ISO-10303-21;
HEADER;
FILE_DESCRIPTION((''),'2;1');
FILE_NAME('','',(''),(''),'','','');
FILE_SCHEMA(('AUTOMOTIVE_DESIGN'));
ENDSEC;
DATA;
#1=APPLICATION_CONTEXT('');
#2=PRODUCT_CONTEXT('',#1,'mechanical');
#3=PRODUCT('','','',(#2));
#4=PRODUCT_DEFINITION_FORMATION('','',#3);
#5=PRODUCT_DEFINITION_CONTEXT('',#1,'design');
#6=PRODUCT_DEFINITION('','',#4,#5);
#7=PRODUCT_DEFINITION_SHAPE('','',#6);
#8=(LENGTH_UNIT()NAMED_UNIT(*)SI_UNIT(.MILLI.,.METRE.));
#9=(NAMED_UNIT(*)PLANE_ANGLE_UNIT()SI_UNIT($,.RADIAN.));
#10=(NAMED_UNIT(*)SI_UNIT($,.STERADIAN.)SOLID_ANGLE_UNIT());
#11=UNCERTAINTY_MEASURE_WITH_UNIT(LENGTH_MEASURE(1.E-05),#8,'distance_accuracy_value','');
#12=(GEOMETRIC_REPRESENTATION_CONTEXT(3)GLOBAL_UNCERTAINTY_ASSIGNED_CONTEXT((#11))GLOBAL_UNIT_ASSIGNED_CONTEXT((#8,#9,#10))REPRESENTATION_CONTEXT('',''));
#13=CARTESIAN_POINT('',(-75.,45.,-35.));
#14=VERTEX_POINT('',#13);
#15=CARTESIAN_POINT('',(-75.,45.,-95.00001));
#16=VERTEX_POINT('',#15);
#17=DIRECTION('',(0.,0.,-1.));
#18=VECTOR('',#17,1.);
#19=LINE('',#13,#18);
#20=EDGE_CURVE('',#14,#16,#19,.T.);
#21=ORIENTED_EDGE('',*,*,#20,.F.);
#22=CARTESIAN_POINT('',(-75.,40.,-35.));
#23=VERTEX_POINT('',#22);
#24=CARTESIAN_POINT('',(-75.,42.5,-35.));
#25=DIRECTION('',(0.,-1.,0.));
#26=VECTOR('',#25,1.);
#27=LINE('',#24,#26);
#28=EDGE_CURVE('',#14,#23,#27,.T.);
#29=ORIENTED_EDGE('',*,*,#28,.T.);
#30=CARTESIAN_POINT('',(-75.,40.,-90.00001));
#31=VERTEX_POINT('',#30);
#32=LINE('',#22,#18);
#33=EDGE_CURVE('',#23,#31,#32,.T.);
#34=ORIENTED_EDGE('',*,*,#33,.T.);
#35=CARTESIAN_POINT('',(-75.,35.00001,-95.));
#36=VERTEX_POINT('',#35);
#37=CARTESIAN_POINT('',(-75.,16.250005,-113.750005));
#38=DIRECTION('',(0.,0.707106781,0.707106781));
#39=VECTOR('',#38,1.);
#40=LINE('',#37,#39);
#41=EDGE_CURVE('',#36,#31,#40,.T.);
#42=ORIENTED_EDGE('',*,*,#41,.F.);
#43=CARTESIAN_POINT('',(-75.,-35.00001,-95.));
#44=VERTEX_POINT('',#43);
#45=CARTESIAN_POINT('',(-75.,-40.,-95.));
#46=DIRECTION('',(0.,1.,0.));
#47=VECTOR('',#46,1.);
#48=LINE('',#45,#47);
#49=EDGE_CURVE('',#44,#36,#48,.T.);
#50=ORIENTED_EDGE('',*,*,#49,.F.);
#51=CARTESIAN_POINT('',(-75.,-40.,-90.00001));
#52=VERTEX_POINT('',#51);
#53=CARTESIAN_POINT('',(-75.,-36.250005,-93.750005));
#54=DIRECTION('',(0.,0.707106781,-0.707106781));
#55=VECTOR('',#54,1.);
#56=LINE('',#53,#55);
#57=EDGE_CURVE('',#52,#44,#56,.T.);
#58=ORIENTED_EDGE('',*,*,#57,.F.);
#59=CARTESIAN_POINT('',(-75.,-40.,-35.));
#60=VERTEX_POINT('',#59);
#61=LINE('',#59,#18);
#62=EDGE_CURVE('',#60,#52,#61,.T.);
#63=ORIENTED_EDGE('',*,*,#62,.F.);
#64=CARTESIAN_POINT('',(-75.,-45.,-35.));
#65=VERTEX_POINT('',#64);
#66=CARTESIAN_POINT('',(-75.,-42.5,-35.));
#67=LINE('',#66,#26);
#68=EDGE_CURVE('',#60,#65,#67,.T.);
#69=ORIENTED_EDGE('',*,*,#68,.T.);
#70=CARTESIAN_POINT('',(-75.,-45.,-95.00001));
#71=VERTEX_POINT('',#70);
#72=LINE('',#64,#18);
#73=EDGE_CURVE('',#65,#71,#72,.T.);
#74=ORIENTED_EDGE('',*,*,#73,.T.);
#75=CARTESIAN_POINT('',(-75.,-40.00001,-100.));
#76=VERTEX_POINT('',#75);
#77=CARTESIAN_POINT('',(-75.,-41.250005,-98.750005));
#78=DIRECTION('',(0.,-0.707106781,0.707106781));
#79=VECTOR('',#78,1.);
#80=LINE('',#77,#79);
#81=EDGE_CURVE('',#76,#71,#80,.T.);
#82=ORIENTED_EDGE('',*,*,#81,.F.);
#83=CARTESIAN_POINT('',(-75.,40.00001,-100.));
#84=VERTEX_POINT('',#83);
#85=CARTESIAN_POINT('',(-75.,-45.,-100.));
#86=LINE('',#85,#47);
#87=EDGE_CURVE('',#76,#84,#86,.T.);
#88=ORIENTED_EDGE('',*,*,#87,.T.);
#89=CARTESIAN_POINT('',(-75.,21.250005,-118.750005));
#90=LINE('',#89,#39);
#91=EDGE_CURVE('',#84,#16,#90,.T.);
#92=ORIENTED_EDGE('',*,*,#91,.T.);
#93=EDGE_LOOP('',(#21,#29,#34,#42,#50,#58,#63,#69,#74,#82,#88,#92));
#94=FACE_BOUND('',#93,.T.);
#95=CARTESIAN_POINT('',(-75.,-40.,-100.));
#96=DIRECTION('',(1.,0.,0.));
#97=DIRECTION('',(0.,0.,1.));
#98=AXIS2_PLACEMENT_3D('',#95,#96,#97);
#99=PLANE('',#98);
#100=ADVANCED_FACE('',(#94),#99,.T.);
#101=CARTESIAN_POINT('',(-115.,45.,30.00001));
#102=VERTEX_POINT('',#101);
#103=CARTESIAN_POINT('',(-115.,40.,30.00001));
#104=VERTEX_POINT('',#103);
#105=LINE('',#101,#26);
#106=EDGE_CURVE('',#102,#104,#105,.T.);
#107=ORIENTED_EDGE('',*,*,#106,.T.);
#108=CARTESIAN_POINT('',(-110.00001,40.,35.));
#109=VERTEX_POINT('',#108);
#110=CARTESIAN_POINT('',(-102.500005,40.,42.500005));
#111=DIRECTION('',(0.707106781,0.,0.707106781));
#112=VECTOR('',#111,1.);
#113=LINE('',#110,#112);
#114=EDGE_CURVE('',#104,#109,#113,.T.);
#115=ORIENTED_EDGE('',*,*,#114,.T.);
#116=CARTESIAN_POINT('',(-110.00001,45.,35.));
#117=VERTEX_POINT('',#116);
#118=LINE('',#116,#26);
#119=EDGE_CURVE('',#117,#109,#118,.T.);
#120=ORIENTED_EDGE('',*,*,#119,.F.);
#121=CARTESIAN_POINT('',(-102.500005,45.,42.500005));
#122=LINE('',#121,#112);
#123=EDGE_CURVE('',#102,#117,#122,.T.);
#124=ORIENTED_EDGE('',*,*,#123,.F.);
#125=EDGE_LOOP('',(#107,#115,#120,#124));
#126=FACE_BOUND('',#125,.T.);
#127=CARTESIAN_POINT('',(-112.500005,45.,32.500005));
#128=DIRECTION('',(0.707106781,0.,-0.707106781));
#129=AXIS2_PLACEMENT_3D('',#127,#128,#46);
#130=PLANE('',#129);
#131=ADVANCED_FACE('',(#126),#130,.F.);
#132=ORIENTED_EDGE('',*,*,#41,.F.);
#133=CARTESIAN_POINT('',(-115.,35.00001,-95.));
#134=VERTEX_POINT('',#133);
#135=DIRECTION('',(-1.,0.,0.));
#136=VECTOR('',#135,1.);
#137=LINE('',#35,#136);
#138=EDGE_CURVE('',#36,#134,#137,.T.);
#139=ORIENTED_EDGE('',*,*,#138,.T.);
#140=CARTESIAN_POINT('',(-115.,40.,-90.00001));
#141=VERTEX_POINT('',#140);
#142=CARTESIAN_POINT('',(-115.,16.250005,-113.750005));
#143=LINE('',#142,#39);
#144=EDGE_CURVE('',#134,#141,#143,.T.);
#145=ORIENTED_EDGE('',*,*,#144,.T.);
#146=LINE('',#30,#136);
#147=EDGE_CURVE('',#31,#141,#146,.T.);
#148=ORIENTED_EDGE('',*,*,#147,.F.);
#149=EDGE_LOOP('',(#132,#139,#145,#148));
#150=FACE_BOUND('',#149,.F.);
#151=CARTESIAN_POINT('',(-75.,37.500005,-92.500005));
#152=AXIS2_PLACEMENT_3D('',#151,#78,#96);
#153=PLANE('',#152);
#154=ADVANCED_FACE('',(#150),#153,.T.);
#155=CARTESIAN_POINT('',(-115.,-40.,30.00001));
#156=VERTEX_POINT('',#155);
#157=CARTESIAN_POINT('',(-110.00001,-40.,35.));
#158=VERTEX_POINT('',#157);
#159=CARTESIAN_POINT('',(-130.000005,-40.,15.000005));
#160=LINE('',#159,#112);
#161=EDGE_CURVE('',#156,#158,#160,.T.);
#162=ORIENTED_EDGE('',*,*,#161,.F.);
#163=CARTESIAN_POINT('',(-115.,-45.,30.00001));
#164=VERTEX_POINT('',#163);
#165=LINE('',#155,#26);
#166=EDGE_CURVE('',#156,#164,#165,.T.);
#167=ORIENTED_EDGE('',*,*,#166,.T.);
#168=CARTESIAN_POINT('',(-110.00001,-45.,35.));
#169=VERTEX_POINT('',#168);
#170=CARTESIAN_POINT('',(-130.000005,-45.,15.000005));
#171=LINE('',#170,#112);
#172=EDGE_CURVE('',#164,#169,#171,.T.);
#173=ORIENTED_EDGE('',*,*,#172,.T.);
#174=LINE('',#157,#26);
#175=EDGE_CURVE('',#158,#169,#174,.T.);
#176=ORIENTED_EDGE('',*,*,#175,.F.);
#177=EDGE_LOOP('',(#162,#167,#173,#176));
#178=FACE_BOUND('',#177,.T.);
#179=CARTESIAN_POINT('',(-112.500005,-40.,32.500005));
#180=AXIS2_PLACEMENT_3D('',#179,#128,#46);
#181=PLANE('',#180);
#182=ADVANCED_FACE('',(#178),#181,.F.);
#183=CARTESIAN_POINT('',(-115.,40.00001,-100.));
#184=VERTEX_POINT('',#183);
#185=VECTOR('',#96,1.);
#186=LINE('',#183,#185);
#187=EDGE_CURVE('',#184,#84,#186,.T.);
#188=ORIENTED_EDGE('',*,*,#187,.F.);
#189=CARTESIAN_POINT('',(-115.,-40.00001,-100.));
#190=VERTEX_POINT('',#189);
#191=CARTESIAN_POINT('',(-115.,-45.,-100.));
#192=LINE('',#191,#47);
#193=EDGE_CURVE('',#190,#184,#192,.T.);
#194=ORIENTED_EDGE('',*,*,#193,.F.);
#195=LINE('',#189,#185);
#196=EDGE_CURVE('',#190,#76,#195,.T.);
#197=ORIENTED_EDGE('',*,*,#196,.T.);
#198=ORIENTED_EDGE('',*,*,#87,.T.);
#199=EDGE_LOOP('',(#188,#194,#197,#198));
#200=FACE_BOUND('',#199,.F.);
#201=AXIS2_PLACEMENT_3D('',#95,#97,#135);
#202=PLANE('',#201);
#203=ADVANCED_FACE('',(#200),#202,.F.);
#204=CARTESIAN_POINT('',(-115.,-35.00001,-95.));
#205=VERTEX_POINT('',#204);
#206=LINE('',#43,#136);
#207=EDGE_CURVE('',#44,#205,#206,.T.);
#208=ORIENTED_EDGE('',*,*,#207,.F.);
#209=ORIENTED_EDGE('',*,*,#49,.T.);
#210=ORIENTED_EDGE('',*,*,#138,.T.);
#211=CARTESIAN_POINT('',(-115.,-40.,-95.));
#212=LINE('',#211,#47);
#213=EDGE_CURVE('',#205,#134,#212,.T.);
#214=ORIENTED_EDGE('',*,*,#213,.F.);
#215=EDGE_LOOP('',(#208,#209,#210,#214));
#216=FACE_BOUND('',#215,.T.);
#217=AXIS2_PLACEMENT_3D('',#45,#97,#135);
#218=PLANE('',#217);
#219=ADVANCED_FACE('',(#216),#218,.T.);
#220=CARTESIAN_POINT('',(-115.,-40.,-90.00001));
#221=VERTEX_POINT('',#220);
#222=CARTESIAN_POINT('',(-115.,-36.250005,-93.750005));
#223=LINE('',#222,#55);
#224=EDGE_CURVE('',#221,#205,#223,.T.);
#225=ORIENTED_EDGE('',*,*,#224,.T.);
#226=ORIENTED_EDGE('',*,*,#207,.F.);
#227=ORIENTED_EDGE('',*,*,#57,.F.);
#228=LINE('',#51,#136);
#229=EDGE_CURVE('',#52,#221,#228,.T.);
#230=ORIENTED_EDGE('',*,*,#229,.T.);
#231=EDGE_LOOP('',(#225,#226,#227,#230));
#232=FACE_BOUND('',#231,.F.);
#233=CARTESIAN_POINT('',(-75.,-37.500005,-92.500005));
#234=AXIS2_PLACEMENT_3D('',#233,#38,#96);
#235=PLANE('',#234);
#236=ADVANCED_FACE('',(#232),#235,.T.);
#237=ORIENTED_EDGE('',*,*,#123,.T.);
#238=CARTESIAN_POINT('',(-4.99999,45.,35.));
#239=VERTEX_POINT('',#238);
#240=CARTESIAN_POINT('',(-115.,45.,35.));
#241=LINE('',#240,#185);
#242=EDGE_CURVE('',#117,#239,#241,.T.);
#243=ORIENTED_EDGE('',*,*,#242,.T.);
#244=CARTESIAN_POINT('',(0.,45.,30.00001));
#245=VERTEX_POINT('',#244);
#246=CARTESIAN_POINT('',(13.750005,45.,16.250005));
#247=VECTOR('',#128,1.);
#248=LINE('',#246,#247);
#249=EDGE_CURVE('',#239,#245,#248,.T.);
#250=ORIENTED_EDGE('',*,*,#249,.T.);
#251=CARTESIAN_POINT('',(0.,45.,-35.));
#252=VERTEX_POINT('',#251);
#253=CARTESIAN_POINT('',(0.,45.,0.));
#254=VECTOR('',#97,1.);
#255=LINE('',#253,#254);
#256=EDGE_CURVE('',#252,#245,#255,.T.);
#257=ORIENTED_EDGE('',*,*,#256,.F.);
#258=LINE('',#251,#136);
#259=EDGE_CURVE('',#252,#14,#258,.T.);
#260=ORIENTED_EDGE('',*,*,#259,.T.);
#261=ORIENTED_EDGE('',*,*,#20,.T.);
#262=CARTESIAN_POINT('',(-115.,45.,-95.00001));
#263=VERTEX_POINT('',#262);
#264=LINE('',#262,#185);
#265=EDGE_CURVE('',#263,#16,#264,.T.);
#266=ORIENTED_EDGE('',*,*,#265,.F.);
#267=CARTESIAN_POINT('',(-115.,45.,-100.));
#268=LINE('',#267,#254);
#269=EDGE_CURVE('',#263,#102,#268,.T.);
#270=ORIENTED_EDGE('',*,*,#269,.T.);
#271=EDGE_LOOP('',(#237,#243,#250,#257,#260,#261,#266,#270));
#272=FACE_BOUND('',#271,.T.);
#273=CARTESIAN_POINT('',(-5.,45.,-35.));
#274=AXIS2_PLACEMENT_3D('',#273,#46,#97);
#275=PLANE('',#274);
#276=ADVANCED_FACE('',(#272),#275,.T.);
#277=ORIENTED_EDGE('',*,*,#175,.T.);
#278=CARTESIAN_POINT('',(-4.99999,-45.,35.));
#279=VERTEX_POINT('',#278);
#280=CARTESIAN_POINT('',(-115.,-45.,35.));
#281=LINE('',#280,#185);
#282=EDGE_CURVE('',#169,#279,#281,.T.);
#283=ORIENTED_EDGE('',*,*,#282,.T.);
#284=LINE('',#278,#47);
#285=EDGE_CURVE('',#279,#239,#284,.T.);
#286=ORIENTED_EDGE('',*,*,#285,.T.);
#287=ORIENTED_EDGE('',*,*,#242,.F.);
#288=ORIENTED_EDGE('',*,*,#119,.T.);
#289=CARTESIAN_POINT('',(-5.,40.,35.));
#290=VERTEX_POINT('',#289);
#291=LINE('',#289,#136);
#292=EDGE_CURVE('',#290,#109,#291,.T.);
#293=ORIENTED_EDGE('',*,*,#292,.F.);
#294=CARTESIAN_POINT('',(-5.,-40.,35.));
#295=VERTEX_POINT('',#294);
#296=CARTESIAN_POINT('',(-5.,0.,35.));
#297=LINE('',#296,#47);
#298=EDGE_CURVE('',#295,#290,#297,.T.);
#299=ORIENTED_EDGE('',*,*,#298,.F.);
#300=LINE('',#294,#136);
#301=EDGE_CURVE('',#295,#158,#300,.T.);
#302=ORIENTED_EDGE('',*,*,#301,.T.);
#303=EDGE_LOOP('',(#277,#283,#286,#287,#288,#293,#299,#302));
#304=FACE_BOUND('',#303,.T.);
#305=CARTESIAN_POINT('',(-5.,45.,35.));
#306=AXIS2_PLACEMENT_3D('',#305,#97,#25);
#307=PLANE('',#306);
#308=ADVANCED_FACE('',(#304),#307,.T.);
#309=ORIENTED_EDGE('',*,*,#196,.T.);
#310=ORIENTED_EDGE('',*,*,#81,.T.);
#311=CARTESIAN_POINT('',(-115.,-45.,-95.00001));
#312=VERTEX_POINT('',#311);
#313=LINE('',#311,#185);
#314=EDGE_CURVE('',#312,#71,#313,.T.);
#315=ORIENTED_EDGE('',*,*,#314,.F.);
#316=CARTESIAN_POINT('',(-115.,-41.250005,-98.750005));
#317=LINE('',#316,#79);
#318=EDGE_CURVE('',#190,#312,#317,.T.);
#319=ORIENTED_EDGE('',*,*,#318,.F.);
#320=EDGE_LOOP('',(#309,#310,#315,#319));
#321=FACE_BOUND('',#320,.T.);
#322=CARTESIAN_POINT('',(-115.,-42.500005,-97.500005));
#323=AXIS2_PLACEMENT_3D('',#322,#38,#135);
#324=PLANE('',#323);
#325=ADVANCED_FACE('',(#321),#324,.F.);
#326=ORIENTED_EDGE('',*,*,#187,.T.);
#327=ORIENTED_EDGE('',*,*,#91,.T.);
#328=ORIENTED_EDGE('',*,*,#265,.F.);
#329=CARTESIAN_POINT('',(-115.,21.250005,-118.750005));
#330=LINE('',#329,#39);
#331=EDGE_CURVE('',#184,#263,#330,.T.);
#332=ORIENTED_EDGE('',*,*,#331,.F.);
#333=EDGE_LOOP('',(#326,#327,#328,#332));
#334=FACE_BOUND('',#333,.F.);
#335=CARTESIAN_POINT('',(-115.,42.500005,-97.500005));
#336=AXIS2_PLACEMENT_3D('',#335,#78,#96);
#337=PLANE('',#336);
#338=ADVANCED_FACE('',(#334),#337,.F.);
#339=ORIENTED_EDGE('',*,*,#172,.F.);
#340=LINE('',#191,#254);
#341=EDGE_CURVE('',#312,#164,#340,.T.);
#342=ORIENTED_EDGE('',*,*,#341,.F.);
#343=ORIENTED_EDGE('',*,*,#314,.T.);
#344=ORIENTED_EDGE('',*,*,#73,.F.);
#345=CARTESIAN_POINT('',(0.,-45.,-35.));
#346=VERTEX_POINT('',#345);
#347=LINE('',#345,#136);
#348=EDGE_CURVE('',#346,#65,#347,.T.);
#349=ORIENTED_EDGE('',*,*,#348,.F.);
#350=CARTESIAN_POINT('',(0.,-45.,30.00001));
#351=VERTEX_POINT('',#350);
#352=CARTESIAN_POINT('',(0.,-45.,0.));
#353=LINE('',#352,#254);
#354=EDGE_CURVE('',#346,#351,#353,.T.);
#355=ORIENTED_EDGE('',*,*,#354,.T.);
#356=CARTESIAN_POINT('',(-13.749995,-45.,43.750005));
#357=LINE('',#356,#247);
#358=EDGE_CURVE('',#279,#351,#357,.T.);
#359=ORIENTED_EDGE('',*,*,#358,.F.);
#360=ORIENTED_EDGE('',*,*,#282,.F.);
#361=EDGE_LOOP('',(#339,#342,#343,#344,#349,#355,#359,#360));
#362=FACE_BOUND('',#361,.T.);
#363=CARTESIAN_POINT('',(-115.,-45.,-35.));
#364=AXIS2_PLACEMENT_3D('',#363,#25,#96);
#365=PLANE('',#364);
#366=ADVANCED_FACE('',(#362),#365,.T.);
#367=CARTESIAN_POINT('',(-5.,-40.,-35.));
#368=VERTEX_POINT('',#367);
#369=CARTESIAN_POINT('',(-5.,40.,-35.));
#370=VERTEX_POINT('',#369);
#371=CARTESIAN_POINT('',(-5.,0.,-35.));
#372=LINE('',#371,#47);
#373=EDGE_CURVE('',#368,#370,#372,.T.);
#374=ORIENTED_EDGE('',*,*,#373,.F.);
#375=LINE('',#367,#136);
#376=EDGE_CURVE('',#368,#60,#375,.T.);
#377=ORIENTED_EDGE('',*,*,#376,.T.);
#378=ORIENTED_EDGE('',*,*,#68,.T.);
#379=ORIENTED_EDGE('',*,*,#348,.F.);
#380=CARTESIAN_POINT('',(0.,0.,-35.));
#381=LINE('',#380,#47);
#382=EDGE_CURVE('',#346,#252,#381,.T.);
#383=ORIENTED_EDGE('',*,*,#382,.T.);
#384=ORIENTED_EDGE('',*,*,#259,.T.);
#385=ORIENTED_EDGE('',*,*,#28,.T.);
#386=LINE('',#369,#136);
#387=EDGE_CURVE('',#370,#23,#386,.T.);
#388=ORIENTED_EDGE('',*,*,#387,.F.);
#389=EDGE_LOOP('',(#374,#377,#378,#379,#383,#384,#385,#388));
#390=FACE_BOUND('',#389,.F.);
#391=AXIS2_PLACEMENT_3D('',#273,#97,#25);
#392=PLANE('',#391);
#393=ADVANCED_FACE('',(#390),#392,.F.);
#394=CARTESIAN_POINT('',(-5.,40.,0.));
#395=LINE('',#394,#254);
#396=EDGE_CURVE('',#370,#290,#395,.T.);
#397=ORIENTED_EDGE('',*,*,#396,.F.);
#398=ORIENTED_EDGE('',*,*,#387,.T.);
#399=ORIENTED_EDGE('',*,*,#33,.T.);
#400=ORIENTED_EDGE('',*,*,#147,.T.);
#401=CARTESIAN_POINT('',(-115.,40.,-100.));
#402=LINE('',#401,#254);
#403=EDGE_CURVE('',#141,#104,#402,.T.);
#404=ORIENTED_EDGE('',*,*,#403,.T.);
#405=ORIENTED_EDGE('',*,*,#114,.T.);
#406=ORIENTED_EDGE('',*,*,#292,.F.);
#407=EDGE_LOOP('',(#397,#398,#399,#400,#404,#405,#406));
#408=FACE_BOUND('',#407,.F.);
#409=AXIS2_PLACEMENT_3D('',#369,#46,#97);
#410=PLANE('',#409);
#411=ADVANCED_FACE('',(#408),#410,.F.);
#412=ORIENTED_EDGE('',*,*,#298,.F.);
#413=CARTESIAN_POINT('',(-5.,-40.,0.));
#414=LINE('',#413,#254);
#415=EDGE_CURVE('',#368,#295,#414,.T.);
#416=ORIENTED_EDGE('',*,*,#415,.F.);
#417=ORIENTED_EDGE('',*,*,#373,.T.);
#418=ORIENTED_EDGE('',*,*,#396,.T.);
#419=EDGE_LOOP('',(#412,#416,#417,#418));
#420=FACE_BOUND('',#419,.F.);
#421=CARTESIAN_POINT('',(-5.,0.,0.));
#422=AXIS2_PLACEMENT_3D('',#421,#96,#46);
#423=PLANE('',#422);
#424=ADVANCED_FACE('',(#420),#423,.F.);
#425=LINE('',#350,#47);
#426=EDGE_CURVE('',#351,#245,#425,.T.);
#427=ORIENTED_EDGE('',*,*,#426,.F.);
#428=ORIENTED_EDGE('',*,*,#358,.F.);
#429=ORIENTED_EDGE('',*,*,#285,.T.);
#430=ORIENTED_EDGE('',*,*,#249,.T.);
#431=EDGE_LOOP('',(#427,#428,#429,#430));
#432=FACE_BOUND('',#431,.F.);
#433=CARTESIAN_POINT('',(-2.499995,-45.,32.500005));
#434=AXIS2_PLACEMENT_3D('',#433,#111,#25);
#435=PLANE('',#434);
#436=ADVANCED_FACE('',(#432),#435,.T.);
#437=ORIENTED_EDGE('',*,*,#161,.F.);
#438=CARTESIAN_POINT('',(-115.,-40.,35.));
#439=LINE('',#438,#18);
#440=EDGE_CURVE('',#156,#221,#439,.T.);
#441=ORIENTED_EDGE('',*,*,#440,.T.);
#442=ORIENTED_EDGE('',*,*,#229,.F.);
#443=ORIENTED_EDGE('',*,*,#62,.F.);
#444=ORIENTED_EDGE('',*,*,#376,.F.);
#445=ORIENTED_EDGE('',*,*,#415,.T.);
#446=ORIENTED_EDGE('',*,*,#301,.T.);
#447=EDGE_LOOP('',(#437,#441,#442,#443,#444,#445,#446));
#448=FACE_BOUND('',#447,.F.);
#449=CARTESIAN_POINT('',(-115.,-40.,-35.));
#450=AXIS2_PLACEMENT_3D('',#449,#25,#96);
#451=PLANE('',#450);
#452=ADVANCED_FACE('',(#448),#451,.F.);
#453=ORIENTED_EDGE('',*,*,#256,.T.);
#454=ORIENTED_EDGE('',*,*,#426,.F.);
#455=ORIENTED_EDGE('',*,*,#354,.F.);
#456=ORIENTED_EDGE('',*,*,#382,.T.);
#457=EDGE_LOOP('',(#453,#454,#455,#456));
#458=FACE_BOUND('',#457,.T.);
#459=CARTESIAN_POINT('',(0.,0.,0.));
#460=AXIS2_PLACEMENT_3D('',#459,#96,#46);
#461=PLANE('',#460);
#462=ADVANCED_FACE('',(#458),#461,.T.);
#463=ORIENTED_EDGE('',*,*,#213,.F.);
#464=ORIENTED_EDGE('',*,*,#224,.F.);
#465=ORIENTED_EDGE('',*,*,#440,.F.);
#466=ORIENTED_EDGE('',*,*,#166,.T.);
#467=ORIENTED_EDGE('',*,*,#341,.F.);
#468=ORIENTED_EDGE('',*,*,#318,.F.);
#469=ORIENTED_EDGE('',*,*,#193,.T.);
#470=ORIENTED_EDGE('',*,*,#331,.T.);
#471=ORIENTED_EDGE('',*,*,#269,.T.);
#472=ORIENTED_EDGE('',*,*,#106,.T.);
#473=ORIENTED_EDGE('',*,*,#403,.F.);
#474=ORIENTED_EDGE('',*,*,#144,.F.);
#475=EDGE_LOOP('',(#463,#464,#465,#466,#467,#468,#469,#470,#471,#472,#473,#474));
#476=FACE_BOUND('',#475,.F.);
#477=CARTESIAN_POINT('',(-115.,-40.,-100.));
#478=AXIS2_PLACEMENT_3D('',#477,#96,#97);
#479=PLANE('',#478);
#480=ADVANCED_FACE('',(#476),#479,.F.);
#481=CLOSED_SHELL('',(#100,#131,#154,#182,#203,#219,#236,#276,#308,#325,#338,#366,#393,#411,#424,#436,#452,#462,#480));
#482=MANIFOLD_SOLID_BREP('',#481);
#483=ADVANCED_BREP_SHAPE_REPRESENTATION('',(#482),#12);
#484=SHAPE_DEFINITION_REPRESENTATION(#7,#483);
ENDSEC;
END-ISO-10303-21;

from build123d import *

# Parameters (mm, degrees)
F0_W     = 90
F0_H     = 70
F1_DEPTH = 5
F2_W     = 5
F2_H     = 70
F3_DEPTH = 110
F4_W     = 40
F4_H     = 5
F5_DEPTH = 65
F6_W     = 40
F6_H     = 5
F7_DEPTH = 80
F8_SIZE  = 4.99999


# Not quite as in the source:
# - a fillet or chamfer is up to 0.001 mm smaller than in the source, because OpenCascade refuses the exact size


with BuildPart() as f1:
    # F0 (on Right) → F1 (new body)
    with BuildSketch(Plane.YZ):
        Rectangle(F0_W, F0_H)
    extrude(amount=-F1_DEPTH)

    # F2 (on face) → F3 (join)
    with BuildSketch(Plane(origin=(-5, 0, 0), x_dir=(0, -1, 0), z_dir=(-1, 0, 0))):
        with Locations((-42.5, 0)):
            Rectangle(F2_W, F2_H)
        with Locations((42.5, 0)):
            Rectangle(F2_W, F2_H)
    extrude(amount=F3_DEPTH)

    # F4 (on face) → F5 (join)
    with BuildSketch(Plane(origin=(0, 0, -35), x_dir=(1, 0, 0), z_dir=(0, 0, -1))):
        with Locations((-95, 42.5)):
            Rectangle(F4_W, F4_H)
        with Locations((-95, -42.5)):
            Rectangle(F4_W, F4_H)
    extrude(amount=F5_DEPTH)

    # F6 (on face) → F7 (join, through all)
    with BuildSketch(Plane(origin=(0, -40, 0), x_dir=(-1, 0, 0), z_dir=(0, 1, 0))):
        with Locations((95, -97.5)):
            Rectangle(F6_W, F6_H)
    extrude(amount=F7_DEPTH)

    # F8 (size 5 in the source; OpenCascade refuses exactly that, so slightly less here)
    f8_edges = [f1.edges().sort_by_distance(p)[0] for p in [
        (0, 0, 35),
        (-115, 42.5, 35),
        (-115, -42.5, 35),
        (-95, -45, -100),
        (-95, -40, -95),
        (-95, 40, -95),
        (-95, 45, -100),
    ]]
    chamfer(f8_edges, length=F8_SIZE)


solid = f1.part
